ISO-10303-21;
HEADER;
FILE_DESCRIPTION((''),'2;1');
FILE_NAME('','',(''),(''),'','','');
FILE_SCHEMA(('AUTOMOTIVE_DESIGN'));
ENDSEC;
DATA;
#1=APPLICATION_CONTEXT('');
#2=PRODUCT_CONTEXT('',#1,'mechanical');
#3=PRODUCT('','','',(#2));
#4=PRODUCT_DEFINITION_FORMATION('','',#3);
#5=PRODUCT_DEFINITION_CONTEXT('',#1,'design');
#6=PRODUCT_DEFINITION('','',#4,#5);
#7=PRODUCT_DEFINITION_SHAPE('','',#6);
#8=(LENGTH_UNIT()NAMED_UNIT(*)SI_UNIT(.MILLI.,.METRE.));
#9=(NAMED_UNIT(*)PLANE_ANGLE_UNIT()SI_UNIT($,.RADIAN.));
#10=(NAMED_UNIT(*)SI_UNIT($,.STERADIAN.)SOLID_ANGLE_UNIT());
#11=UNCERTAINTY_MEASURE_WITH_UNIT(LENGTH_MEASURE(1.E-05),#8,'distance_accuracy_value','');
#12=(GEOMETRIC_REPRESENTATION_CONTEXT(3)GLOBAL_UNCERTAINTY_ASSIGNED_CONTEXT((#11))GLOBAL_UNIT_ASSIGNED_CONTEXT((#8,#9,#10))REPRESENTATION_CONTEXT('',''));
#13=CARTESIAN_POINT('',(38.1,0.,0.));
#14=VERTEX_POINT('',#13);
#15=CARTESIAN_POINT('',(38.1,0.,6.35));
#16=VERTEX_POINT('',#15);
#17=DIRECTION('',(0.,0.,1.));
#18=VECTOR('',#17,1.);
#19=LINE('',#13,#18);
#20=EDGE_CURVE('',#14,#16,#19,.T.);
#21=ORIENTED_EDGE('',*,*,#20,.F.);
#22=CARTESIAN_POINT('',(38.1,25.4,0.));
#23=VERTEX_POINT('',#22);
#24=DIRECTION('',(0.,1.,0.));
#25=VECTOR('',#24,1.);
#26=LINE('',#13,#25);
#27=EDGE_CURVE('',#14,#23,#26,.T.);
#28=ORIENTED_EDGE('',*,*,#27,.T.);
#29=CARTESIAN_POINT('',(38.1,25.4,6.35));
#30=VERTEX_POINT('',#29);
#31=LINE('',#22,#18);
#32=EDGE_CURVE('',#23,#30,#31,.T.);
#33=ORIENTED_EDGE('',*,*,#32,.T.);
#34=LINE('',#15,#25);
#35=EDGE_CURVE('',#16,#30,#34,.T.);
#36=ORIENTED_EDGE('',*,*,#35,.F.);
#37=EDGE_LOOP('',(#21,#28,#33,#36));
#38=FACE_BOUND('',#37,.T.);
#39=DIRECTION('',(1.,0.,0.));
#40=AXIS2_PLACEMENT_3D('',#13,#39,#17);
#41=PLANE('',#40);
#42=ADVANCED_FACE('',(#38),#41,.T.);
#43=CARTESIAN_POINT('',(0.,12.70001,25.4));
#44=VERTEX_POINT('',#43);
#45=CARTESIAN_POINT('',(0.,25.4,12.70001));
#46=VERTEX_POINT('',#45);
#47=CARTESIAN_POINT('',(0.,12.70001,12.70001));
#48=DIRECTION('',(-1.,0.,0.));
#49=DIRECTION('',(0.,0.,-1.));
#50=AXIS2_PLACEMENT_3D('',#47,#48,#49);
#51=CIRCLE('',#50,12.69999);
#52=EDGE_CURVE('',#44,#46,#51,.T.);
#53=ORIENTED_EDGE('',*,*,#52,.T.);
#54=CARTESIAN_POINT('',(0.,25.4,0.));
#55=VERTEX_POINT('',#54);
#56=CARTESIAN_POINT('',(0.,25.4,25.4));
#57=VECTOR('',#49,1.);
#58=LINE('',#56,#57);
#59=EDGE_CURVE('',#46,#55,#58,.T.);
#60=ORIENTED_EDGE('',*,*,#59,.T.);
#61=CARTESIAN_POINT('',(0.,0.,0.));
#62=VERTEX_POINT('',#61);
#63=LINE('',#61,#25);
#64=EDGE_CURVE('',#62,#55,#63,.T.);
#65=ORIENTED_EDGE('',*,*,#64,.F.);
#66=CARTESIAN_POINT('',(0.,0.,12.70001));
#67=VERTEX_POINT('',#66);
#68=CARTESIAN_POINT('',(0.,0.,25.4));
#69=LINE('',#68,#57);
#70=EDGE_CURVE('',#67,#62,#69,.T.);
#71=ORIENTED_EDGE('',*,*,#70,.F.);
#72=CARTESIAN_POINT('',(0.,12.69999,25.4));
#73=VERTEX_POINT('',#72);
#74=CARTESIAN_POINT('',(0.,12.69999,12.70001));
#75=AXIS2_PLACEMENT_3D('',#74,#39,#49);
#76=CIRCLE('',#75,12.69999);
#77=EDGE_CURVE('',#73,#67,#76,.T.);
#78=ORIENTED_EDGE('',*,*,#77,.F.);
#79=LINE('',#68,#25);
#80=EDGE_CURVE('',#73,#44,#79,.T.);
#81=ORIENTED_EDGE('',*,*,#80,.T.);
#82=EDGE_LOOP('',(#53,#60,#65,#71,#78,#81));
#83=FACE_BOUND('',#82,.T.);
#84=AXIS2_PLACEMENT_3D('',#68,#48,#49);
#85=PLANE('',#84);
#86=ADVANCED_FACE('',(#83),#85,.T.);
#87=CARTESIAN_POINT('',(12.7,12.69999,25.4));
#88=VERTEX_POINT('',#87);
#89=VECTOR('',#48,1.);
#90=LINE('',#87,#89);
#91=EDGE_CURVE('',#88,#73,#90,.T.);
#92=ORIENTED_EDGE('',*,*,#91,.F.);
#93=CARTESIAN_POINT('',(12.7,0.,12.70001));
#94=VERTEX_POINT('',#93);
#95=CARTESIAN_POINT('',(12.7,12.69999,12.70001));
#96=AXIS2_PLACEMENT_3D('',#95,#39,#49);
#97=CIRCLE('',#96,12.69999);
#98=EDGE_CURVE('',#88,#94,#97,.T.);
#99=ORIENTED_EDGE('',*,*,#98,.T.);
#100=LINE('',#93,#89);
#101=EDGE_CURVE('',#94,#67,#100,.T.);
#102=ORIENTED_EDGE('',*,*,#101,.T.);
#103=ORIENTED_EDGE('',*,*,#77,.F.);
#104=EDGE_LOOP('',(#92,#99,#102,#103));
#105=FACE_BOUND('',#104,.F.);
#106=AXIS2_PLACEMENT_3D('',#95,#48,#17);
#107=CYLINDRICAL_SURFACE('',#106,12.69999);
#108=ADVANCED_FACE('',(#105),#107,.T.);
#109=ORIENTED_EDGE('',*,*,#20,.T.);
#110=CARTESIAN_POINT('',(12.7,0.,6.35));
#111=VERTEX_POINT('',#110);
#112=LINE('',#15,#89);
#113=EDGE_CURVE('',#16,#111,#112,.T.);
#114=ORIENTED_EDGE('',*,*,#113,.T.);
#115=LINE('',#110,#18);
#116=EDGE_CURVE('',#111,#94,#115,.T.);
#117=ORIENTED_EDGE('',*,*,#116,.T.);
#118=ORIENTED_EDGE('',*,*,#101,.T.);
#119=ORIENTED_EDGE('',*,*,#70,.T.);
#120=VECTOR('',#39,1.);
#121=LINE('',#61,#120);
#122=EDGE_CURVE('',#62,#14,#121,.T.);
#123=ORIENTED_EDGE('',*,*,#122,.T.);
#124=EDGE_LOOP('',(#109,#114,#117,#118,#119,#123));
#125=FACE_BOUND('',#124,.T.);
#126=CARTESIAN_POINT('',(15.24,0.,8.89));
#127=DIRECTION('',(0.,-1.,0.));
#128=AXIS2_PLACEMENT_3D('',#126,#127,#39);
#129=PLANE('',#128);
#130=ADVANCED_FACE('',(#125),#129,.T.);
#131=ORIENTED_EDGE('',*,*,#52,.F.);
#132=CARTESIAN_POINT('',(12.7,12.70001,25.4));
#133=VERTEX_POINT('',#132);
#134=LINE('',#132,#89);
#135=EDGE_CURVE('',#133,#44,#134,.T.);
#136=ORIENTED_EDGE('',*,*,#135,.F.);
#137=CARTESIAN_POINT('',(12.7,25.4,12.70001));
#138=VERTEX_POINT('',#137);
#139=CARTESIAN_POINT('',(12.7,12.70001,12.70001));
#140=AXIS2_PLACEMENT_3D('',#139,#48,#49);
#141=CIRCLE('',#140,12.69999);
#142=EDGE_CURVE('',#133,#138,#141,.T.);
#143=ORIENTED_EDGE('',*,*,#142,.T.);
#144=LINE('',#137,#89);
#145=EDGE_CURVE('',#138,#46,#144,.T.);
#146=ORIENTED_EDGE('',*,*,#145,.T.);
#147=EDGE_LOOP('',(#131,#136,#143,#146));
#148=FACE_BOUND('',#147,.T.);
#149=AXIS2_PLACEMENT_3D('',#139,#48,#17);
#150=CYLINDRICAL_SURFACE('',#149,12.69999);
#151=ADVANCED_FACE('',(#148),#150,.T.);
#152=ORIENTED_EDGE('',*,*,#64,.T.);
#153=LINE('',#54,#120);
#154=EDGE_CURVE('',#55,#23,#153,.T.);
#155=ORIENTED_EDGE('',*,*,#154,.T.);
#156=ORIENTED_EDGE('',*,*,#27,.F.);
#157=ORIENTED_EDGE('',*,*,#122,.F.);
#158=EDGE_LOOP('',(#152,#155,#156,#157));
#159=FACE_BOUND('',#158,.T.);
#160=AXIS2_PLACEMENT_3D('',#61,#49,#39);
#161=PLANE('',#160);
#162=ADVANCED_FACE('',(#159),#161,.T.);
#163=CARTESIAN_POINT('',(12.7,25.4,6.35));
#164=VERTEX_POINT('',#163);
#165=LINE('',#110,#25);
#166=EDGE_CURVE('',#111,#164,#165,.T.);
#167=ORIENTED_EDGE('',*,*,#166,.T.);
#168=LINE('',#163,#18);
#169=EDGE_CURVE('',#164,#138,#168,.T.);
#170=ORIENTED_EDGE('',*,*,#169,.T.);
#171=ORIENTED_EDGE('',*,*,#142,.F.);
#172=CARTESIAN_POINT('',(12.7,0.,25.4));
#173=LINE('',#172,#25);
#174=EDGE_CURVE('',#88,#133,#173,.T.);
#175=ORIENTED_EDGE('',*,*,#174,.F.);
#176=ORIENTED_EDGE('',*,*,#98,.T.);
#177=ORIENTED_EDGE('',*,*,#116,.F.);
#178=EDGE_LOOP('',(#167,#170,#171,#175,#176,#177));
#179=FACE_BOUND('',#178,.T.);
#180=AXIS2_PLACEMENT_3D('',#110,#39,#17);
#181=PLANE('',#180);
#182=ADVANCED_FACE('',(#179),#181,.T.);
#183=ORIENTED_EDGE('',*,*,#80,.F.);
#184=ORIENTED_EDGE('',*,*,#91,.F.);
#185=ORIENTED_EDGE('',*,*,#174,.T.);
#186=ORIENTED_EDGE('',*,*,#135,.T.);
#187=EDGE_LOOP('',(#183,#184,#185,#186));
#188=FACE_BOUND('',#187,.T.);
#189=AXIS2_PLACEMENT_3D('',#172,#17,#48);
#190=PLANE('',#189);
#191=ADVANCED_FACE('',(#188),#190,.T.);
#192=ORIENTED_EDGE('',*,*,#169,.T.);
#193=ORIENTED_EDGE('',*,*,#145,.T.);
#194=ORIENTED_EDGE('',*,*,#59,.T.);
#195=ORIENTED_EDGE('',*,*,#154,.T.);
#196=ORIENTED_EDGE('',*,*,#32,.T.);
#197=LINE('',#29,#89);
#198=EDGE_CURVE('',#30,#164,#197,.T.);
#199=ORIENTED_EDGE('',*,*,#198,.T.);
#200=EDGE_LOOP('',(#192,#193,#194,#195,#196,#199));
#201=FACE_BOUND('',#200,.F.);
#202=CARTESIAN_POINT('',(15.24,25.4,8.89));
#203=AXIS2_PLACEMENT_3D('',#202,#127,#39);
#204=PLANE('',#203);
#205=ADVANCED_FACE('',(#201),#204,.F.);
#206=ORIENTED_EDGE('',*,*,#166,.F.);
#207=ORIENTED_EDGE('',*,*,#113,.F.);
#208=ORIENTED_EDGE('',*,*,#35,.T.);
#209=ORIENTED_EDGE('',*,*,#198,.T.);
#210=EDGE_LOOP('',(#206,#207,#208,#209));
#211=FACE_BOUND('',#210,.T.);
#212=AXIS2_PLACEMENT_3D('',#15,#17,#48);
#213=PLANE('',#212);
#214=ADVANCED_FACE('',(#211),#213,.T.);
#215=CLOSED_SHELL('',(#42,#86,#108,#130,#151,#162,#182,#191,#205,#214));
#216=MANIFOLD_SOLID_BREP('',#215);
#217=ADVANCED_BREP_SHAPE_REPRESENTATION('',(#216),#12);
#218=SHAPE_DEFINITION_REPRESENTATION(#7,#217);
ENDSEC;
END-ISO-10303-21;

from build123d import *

# Parameters (mm, degrees)
F1_DEPTH = 25.4
F2_R     = 12.69999


# Not quite as in the source:
# - a fillet or chamfer is up to 0.001 mm smaller than in the source, because OpenCascade refuses the exact size


with BuildPart() as f1:
    # F0 (on Front) → F1 (new body)
    with BuildSketch(Plane.XZ):
        Polygon((0, 25.4), (0, 0), (38.1, 0), (38.1, 6.35), (12.7, 6.35), (12.7, 25.4), align=None)
    extrude(amount=-F1_DEPTH)

    # F2 (radius 12.7 in the source; OpenCascade refuses exactly that, so slightly less here)
    f2_edges = [f1.edges().sort_by_distance(p)[0] for p in [
        (6.35, 0, 25.4),
        (6.35, 25.4, 25.4),
    ]]
    fillet(f2_edges, radius=F2_R)


solid = f1.part
